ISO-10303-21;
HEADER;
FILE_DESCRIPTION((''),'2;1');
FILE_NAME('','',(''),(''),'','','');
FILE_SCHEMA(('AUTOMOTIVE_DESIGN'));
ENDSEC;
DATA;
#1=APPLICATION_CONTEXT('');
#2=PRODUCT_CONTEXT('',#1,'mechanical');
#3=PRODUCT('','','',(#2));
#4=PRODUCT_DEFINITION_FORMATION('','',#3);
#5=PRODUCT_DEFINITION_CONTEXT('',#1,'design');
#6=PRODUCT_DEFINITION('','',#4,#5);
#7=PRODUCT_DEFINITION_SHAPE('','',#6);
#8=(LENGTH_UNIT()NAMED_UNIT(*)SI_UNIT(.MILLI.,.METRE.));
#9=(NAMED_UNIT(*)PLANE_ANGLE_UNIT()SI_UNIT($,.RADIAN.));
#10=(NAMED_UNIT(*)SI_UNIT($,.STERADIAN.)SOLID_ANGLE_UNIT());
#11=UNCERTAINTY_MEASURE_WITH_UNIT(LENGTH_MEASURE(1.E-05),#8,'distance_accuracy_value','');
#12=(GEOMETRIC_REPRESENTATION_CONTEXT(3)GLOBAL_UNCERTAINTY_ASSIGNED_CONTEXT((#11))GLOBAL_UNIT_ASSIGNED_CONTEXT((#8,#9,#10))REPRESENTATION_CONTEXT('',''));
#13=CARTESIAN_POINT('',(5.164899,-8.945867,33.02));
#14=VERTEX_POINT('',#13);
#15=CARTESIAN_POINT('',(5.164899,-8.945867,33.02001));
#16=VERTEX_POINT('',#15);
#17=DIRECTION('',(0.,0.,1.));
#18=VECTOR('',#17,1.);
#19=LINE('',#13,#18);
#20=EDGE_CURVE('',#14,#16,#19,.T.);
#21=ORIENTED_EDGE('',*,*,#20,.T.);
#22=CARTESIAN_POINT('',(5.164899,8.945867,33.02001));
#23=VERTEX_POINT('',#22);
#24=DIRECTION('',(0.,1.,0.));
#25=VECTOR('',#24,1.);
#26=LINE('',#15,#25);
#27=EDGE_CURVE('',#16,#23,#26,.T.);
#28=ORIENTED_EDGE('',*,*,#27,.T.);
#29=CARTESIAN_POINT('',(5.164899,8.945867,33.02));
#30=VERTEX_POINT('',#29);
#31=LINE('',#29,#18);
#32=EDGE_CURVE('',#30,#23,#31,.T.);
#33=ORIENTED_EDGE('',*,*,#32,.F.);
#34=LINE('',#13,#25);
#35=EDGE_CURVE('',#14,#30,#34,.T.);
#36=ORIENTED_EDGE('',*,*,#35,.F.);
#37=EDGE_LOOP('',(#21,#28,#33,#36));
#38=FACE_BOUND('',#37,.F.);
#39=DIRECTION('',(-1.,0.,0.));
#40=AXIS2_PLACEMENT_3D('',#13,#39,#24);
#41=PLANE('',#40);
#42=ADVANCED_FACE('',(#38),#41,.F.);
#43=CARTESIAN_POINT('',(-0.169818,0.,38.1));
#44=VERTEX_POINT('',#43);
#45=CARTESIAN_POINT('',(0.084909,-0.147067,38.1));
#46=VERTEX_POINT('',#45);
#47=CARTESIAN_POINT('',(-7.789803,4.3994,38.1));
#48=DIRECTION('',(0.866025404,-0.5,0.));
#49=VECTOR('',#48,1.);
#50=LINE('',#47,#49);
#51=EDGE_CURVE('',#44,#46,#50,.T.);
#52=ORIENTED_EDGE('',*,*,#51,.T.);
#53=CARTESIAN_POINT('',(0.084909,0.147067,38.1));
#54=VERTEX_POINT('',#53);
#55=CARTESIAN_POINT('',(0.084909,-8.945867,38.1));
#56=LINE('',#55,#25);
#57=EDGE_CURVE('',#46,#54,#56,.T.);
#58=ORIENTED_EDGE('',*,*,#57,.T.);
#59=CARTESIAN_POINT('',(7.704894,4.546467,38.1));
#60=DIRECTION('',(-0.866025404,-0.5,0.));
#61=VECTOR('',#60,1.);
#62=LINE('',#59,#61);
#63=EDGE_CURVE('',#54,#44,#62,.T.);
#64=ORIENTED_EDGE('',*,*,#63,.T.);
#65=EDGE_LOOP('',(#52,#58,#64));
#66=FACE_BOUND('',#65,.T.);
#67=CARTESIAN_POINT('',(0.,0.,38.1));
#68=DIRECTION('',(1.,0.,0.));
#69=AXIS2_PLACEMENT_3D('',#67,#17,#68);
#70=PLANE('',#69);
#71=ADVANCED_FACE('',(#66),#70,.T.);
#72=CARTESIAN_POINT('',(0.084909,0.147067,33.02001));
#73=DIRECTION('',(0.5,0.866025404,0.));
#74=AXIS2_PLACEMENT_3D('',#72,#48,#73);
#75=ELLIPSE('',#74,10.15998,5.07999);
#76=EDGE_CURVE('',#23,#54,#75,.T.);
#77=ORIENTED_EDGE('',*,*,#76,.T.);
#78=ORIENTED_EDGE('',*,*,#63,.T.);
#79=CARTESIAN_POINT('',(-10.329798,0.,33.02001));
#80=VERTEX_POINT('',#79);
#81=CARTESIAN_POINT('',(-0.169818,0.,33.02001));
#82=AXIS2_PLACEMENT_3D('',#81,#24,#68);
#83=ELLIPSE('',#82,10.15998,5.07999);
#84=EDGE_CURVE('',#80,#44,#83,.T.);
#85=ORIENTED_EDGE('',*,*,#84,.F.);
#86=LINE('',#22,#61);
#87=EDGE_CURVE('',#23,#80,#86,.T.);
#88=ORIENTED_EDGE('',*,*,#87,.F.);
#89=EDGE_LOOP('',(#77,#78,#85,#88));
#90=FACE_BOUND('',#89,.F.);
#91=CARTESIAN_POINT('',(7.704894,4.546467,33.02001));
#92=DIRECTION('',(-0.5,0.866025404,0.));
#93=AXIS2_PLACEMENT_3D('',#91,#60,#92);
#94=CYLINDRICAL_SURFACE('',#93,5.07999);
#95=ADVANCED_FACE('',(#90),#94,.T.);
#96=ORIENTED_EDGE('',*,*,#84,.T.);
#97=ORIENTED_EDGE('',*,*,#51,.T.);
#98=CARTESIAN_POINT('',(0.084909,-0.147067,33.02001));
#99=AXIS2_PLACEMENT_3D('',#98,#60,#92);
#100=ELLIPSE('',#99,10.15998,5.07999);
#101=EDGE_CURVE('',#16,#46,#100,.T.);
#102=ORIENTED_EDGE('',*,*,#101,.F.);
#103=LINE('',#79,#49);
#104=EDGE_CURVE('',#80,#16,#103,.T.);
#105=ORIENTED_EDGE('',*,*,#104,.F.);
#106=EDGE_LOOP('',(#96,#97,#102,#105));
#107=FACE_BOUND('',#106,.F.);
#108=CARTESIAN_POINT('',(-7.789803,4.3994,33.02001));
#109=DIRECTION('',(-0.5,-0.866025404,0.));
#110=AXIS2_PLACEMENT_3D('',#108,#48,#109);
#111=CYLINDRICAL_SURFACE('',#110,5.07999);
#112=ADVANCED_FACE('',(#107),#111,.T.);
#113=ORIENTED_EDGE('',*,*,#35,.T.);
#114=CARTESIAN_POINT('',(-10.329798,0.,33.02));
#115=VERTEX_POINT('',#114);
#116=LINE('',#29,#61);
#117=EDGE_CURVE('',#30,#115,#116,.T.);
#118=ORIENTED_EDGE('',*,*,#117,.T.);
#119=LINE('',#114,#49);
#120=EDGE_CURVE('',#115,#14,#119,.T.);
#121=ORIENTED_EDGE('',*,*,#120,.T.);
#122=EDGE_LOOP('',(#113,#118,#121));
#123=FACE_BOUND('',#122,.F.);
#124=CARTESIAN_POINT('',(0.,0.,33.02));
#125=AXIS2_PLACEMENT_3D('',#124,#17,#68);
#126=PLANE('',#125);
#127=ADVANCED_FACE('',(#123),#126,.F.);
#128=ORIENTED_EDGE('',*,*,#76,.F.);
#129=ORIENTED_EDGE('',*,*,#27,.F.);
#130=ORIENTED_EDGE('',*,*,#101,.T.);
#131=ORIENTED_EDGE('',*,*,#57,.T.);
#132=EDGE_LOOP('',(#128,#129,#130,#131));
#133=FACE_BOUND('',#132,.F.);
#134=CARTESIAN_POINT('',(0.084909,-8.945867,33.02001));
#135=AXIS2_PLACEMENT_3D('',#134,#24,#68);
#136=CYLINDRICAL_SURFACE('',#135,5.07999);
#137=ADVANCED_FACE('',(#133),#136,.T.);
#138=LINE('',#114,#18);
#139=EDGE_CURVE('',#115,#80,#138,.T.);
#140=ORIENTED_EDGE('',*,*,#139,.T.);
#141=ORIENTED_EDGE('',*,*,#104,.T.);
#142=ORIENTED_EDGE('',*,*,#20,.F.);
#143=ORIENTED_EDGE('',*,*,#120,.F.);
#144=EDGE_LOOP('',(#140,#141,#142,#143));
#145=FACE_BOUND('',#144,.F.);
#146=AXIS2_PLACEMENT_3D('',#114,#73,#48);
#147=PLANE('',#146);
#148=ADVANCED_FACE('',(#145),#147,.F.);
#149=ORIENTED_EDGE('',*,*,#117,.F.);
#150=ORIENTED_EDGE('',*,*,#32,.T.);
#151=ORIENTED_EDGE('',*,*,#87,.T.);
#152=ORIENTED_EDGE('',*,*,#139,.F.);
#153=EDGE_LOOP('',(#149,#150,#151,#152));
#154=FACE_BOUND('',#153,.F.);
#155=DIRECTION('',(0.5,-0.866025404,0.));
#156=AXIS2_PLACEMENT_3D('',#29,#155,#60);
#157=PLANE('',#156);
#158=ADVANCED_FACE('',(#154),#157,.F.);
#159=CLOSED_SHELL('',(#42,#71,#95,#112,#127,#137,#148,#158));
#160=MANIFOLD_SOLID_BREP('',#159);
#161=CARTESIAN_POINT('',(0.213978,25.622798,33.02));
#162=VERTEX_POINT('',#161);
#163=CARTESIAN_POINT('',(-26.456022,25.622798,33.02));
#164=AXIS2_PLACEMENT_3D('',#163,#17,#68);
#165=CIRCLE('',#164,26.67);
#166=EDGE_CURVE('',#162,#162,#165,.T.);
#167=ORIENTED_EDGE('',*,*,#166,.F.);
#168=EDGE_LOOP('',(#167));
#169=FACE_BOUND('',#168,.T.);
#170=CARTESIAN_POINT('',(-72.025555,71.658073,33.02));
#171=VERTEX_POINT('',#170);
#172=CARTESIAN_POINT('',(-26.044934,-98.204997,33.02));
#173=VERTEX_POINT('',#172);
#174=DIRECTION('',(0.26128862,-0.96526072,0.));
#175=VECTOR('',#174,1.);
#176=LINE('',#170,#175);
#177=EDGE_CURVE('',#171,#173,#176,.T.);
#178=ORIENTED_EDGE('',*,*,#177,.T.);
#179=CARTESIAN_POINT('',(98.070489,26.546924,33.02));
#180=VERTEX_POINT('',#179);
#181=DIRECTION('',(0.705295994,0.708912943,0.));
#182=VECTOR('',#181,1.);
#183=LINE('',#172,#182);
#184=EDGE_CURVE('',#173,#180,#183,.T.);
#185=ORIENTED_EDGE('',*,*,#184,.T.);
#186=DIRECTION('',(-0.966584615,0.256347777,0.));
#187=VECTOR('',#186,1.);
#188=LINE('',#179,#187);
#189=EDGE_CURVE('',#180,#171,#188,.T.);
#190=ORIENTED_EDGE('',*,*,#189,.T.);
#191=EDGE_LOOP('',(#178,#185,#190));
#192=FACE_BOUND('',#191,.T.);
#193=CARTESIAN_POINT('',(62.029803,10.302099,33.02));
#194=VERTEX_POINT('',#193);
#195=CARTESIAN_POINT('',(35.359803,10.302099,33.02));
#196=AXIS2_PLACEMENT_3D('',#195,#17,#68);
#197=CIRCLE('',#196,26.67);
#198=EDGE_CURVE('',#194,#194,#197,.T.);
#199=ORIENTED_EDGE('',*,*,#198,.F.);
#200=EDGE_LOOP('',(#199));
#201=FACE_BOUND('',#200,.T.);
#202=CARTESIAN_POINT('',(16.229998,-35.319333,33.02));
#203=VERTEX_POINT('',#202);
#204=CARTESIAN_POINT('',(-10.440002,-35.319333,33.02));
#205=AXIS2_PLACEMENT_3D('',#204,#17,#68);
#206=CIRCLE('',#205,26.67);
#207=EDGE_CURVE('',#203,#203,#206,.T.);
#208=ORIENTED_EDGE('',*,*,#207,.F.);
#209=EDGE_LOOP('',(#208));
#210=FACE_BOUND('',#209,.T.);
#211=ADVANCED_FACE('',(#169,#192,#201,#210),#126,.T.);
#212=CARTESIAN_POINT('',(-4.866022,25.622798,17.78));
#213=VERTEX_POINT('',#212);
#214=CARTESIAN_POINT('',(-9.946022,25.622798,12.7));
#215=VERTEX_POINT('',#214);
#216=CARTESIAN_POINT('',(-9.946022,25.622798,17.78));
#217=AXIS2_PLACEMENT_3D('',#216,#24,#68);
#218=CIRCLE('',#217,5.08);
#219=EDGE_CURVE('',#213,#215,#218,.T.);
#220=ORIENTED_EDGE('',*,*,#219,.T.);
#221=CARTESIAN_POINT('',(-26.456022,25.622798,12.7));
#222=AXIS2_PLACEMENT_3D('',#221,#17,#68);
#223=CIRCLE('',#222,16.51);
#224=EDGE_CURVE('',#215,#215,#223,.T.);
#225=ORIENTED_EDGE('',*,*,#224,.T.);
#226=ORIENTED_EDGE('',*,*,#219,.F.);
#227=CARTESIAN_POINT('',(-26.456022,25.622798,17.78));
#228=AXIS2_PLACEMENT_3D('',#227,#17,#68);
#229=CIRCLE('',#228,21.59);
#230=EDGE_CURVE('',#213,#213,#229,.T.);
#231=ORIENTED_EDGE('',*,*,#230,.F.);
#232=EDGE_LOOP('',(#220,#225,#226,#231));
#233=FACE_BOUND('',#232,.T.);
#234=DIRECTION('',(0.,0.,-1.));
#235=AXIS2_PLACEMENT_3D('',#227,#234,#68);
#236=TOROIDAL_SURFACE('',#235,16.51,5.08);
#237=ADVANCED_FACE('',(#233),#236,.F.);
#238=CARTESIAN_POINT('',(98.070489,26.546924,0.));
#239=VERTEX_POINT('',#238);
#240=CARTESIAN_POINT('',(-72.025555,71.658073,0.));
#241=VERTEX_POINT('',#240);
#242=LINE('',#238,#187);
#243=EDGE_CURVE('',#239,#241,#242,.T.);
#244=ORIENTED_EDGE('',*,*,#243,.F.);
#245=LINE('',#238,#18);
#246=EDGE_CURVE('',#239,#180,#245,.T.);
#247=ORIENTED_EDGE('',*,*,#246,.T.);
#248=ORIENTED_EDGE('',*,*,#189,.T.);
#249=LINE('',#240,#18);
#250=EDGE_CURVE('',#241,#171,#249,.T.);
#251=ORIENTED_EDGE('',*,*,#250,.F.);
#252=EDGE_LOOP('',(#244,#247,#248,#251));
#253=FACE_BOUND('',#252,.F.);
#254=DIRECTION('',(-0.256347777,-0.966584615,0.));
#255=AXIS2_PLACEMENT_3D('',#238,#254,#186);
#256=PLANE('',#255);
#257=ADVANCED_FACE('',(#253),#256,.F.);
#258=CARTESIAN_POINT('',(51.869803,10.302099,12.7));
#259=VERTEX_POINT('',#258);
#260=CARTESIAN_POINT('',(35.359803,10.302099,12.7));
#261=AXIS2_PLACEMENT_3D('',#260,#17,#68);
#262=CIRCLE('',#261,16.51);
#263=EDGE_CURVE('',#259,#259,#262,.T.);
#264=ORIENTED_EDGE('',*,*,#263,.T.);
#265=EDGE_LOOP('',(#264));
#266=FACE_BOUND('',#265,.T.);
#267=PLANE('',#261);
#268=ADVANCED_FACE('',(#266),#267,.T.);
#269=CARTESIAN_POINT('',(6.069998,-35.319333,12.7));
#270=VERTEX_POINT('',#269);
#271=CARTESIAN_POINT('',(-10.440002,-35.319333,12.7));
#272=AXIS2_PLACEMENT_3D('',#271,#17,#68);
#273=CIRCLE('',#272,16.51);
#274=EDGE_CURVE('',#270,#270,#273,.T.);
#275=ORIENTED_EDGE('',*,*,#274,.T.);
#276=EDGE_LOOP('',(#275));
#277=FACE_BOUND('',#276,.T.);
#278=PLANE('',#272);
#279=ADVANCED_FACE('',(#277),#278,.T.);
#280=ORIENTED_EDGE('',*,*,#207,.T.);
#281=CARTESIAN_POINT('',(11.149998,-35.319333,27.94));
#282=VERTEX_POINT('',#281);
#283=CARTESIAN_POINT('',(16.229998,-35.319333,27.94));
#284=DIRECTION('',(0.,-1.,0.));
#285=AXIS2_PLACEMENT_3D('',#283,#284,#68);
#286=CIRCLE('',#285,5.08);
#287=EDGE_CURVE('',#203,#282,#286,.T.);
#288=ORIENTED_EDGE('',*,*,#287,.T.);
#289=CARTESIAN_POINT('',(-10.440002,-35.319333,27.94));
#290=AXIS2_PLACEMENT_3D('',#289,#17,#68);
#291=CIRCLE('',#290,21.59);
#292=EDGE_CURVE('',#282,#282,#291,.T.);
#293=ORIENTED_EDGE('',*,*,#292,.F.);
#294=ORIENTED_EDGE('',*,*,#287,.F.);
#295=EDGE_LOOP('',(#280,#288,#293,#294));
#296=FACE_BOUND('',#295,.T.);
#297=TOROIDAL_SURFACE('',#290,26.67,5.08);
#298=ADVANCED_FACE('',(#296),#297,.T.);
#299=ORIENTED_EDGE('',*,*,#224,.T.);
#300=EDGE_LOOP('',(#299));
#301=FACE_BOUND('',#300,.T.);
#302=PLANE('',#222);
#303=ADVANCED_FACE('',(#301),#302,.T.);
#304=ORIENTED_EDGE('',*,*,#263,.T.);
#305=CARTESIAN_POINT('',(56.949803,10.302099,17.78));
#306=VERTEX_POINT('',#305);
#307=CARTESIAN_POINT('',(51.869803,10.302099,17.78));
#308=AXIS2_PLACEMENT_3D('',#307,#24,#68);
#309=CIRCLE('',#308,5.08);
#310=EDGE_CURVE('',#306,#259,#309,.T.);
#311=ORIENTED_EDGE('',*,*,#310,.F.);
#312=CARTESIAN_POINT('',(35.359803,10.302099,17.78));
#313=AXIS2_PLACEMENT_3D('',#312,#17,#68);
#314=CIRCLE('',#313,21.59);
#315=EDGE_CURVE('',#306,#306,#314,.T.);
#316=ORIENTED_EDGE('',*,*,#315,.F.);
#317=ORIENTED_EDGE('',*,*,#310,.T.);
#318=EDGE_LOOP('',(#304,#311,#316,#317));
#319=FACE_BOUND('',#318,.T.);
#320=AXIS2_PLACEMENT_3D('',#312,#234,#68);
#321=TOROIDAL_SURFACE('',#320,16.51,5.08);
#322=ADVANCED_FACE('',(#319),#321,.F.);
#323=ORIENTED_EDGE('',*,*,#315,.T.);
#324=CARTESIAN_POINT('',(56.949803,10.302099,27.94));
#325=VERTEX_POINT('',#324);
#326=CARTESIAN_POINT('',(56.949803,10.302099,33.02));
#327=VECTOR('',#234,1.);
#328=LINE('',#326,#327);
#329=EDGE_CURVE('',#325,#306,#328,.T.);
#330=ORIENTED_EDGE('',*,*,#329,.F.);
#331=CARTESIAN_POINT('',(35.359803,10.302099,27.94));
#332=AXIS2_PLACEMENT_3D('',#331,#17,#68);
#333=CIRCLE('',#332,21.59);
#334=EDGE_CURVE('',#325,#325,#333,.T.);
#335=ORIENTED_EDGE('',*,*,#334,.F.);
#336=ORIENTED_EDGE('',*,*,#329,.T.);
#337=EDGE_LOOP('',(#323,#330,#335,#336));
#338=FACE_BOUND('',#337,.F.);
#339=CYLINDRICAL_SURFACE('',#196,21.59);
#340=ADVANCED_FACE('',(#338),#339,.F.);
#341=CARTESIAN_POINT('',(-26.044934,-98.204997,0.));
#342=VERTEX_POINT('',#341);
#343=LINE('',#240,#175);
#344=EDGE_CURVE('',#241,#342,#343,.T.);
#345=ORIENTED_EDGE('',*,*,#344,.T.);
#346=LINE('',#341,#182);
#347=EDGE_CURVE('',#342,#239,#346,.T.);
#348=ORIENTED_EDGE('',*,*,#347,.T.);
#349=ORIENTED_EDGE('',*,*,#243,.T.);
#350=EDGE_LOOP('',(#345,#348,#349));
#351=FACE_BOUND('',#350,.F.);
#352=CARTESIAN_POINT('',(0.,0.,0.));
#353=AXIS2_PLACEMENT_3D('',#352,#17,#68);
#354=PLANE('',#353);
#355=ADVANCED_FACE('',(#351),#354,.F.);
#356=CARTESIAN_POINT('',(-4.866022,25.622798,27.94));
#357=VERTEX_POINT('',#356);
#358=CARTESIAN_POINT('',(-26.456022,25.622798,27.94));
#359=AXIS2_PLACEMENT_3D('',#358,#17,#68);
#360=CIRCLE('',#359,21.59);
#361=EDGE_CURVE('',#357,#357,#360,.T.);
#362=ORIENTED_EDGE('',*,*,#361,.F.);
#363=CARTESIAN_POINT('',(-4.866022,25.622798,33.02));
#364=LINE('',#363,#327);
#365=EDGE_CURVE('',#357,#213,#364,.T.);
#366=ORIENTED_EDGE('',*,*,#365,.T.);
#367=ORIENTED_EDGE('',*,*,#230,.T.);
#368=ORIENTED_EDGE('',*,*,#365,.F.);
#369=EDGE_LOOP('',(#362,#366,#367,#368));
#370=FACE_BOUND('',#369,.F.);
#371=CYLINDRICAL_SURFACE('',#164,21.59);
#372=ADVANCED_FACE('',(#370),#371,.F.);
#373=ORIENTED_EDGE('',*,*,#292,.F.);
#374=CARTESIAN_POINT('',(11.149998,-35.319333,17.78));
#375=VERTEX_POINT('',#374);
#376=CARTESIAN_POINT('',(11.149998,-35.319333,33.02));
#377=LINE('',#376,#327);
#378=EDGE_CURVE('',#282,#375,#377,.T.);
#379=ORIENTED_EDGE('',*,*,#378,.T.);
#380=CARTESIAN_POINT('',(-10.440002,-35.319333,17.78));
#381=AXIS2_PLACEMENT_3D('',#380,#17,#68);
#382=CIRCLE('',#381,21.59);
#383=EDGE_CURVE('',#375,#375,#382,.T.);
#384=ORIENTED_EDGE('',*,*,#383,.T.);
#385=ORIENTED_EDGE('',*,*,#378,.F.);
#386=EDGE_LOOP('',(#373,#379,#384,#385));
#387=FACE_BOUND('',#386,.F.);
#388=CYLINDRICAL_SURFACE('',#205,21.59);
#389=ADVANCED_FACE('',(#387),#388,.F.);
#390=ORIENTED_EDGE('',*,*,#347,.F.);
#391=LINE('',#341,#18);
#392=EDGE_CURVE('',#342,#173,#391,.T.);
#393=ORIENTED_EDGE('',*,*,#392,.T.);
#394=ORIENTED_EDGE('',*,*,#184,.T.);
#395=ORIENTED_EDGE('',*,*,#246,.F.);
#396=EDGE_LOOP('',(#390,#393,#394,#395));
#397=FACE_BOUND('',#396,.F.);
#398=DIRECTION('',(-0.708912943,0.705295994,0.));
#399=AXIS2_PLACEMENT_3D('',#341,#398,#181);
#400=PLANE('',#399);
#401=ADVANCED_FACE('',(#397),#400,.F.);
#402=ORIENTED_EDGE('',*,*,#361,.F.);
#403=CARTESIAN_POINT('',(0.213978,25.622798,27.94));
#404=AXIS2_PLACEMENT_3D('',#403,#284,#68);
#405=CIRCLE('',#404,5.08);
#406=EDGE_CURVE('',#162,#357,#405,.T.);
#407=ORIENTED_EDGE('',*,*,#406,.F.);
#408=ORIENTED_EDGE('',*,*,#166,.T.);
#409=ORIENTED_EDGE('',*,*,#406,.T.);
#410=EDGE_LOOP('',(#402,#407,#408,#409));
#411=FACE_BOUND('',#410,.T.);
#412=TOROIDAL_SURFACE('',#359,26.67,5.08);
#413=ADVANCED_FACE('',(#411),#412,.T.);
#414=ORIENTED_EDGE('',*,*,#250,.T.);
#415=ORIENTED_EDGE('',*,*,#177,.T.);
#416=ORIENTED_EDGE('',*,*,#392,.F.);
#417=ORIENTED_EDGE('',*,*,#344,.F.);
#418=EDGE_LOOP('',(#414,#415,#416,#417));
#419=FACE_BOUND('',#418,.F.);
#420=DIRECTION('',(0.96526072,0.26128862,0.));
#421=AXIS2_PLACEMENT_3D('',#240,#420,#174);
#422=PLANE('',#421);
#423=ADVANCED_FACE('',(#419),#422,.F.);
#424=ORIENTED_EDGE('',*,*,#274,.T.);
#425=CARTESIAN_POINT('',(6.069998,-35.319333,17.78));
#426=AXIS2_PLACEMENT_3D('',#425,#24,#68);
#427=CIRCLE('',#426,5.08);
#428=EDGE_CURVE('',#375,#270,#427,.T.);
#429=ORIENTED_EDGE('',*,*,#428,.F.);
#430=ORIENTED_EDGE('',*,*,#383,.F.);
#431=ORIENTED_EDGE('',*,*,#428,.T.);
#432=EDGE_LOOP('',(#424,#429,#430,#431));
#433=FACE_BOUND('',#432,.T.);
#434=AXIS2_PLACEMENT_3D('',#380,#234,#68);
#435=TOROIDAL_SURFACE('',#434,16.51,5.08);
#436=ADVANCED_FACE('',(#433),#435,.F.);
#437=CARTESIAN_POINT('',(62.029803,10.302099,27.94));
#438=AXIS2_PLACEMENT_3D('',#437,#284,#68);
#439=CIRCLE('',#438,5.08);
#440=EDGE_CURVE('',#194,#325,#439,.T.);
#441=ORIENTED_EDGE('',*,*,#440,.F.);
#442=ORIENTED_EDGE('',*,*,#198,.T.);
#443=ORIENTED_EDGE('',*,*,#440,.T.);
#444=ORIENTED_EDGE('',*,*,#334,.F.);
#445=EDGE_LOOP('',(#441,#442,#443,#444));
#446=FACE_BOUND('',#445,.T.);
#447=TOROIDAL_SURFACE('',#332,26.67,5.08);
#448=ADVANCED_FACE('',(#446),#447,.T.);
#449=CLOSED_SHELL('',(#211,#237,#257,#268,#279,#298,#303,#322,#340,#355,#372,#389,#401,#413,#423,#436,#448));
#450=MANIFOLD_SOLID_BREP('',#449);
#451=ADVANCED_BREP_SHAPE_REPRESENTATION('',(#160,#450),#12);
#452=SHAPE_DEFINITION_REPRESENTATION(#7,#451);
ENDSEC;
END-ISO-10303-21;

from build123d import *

# Parameters (mm, degrees)
F1_DEPTH = 33.02
F2_R     = 21.59
F3_DEPTH = 20.32
F4_R     = 5.08
F6_DEPTH = 5.08
F7_R     = 5.07999


# Not quite as in the source:
# - a fillet or chamfer is up to 0.001 mm smaller than in the source, because OpenCascade refuses the exact size


with BuildPart() as f1:
    # F0 (on Top) → F1 (new body)
    with BuildSketch(Plane.XY):
        Polygon((-26.044934144, -98.2049968455), (98.0704891188, 26.5469238142), (-72.0255549748, 71.6580730314), align=None)
    extrude(amount=F1_DEPTH)

    # F2 (on face) → F3 (cut)
    with BuildSketch(Plane.XY.offset(33.02)):
        with Locations((-26.4560222886, 25.6227981428)):
            Circle(F2_R)
        with Locations((-10.44000236, -35.3193325351)):
            Circle(F2_R)
        with Locations((35.3598029055, 10.3020987419)):
            Circle(F2_R)
    extrude(amount=-F3_DEPTH, mode=Mode.SUBTRACT)

    # F4
    f4_edges = [f1.edges().sort_by_distance(p)[0] for p in [
        (-48.046022, 25.622798, 33.02),
        (-32.030002, -35.319333, 33.02),
        (13.769803, 10.302099, 33.02),
        (-48.046022, 25.622798, 12.7),
        (-32.030002, -35.319333, 12.7),
        (13.769803, 10.302099, 12.7),
    ]]
    fillet(f4_edges, radius=F4_R)


with BuildPart() as f6:
    # F5 (on face) → F6 (new body)
    with BuildSketch(Plane.XY.offset(33.02)):
        Polygon((5.164898932, -8.9458673661), (5.164898932, 8.9458673661), (-10.329797864, 0), align=None)
    extrude(amount=F6_DEPTH)

    # F7 (radius 5.08 in the source; OpenCascade refuses exactly that, so slightly less here)
    f7_edges = [f6.edges().sort_by_distance(p)[0] for p in [
        (5.164899, 0, 38.1),
        (-2.582449, -4.472934, 38.1),
        (-2.582449, 4.472934, 38.1),
    ]]
    fillet(f7_edges, radius=F7_R)


solid = Compound([f1.part, f6.part])
